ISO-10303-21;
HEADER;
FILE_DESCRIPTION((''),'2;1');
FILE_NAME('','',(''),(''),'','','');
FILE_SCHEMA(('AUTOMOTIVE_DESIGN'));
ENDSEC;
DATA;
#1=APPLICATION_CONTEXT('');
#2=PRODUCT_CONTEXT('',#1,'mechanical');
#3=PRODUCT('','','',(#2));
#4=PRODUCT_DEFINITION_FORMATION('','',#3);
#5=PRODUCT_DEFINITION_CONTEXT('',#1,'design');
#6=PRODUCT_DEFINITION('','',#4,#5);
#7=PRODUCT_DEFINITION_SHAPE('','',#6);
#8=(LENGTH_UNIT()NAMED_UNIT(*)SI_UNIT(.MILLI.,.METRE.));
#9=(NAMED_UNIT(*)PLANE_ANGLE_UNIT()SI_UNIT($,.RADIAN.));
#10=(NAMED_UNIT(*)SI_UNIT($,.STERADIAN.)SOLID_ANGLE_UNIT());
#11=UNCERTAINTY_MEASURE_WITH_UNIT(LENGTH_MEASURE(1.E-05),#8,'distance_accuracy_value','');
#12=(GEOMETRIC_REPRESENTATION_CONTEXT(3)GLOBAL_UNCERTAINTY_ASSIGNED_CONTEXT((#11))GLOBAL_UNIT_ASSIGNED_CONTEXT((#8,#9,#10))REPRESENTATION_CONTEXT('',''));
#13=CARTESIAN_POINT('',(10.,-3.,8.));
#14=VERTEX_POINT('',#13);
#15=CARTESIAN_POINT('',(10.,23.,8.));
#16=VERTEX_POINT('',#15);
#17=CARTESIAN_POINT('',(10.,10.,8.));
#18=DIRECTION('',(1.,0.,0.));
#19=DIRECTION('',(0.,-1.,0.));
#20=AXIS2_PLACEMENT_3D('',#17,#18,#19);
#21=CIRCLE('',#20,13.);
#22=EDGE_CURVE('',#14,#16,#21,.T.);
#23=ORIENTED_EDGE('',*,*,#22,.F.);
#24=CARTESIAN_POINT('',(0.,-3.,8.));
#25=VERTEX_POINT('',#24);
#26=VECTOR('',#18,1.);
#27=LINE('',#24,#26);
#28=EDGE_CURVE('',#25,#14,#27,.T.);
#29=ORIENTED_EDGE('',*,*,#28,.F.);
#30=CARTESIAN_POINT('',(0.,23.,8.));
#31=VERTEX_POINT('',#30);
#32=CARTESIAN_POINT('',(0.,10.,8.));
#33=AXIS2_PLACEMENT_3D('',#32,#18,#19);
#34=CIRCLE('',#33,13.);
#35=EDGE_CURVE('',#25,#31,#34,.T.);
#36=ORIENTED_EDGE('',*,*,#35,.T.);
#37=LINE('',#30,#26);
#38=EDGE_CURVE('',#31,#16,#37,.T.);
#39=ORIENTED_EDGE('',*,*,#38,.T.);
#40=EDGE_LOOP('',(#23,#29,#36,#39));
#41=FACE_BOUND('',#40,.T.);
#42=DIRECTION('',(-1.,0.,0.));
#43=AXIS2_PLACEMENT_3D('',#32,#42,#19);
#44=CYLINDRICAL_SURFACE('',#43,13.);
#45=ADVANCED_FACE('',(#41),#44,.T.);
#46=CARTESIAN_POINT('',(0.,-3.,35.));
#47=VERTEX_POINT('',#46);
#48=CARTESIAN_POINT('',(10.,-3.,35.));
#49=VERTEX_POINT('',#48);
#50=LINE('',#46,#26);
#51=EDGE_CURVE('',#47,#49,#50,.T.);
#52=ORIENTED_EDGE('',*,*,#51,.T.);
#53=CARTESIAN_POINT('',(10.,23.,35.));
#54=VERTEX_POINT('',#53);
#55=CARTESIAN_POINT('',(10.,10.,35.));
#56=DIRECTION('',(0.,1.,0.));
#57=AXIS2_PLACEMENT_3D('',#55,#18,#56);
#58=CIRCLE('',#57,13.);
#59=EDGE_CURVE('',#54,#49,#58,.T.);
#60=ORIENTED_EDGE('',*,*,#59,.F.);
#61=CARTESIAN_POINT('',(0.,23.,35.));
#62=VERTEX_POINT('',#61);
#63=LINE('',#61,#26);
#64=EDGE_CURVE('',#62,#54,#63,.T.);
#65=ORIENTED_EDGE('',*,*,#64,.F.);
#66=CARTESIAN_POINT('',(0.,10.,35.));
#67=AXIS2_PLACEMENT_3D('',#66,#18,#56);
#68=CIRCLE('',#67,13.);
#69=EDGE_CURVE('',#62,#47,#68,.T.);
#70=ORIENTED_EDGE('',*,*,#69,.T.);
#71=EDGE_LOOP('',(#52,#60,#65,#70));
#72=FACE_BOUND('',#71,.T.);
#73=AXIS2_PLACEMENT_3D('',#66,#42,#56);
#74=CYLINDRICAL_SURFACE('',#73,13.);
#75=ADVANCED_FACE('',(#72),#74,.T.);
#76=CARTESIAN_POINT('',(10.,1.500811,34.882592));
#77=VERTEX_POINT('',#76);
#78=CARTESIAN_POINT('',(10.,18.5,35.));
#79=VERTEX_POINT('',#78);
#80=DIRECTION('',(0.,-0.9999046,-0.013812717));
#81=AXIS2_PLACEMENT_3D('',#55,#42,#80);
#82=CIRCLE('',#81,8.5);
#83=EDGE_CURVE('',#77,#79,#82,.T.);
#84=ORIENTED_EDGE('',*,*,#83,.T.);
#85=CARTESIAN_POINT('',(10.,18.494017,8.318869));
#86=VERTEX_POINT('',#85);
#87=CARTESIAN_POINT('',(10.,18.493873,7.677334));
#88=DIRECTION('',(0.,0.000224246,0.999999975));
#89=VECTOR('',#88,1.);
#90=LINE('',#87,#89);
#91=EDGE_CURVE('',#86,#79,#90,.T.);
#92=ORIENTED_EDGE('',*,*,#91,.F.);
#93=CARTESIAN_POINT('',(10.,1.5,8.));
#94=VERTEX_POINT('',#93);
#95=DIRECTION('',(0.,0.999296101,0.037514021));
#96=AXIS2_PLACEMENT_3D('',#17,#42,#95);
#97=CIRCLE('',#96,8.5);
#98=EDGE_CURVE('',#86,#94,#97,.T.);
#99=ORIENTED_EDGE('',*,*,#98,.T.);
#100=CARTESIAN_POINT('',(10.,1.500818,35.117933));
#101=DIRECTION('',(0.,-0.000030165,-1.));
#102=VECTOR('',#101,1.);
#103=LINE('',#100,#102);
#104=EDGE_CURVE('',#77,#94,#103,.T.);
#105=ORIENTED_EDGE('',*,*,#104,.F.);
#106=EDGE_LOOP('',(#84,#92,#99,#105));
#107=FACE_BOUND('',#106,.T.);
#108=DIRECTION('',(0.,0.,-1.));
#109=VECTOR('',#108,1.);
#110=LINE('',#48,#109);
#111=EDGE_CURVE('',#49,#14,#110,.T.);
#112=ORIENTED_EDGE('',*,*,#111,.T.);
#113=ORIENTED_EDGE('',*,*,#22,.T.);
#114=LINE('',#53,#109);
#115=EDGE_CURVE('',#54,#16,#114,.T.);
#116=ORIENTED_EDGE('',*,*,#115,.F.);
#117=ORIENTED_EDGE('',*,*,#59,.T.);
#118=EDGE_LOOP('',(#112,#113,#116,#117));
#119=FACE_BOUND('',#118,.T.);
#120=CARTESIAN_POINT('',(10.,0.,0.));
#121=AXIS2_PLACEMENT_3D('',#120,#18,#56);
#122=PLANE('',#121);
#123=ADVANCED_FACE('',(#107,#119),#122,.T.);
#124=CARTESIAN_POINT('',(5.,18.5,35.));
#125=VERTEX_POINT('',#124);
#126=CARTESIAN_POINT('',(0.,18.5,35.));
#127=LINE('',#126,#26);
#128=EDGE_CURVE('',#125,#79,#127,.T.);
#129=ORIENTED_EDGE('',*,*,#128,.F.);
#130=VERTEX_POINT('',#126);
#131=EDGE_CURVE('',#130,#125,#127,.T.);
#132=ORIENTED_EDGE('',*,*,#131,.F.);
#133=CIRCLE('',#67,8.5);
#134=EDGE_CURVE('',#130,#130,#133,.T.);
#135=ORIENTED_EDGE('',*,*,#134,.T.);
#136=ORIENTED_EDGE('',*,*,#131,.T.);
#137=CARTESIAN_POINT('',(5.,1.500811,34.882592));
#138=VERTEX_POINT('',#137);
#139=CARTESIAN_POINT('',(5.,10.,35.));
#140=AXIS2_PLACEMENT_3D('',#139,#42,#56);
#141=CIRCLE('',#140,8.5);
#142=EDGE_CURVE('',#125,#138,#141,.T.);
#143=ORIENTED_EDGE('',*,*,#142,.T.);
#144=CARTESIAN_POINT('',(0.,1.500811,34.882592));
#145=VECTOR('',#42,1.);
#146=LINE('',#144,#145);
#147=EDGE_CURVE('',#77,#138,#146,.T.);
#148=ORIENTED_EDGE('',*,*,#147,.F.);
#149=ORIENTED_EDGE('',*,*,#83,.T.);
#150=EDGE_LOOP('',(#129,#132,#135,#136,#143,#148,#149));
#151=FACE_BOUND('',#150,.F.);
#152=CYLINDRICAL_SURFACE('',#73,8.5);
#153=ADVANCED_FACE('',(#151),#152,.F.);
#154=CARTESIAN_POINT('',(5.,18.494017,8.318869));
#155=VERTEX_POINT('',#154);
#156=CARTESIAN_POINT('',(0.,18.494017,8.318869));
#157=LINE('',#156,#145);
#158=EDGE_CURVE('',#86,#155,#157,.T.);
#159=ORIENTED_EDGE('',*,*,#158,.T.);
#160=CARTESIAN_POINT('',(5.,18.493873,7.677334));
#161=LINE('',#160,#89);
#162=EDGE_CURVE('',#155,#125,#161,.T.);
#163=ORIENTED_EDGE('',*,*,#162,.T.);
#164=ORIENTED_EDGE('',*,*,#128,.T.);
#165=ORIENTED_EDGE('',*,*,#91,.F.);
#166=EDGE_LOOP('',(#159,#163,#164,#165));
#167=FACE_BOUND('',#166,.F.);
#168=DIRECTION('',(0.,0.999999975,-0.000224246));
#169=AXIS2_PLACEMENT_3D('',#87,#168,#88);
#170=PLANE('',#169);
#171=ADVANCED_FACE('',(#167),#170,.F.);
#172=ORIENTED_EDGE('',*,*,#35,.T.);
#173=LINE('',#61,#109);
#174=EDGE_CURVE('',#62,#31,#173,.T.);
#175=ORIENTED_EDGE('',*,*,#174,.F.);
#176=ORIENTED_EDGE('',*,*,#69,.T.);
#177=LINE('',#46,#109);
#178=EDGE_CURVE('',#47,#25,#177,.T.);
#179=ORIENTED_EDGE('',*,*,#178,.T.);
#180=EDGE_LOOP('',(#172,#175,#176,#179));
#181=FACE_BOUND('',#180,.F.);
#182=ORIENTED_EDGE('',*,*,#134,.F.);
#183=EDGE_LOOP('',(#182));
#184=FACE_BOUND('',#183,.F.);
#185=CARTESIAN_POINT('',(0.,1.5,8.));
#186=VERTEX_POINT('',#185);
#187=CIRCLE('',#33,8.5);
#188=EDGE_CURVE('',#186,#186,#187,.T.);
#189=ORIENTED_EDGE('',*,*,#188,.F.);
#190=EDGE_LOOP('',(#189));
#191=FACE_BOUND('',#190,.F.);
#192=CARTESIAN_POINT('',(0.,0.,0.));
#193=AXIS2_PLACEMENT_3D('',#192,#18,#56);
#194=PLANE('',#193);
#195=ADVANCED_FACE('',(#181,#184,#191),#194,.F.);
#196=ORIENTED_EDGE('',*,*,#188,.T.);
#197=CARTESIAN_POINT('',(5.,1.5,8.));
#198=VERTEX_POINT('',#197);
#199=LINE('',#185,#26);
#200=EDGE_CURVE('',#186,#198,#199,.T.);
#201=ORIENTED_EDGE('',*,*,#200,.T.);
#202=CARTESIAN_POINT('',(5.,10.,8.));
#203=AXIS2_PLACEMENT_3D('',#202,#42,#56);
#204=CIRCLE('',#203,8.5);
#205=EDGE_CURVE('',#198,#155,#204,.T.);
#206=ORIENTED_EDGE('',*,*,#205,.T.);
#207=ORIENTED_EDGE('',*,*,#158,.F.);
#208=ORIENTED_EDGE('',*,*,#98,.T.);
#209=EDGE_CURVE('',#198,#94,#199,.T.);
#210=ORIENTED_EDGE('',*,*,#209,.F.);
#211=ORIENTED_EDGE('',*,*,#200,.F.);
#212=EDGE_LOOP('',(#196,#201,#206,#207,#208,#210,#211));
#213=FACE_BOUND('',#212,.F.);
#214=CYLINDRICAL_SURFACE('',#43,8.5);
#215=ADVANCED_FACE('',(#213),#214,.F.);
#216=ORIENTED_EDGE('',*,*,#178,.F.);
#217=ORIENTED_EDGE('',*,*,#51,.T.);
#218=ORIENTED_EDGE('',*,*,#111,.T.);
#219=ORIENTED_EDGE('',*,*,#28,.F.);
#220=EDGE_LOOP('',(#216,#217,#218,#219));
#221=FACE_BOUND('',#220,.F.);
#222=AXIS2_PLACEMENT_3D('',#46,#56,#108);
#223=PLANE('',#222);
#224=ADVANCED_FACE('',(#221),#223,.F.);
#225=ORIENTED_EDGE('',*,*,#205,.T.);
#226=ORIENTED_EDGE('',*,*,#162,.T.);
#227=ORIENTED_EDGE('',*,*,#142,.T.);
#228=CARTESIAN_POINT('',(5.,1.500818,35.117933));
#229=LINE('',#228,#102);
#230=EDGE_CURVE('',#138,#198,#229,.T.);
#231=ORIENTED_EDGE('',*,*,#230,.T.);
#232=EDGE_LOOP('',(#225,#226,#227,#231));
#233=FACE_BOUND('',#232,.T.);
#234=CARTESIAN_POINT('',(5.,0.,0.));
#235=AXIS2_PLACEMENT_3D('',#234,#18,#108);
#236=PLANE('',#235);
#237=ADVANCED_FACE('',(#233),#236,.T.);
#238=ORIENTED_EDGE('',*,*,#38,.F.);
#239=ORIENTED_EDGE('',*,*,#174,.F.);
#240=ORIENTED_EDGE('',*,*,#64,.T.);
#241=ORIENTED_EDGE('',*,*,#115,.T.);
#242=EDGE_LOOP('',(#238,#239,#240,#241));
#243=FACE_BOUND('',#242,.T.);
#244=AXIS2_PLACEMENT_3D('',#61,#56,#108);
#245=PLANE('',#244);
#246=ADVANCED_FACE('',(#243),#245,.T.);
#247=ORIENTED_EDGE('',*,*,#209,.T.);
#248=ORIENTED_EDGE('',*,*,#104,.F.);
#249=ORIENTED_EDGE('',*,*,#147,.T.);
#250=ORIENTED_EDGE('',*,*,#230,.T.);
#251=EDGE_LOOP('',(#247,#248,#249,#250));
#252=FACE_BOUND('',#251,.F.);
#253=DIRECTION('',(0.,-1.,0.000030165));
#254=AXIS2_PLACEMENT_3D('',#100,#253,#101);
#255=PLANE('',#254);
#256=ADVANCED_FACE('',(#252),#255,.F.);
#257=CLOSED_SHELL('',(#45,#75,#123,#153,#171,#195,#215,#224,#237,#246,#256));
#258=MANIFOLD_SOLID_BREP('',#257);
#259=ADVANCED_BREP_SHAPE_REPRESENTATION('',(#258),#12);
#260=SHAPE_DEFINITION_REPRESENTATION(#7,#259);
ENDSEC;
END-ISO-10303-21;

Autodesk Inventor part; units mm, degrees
ref_plane "YZ Plane" through (0, 0, 0) normal (1, 0, 0) x (0, 1, 0)
ref_plane "XZ Plane" through (0, 0, 0) normal (0, 1, 0) x (-1, 0, 0)
ref_plane "XY Plane" through (0, 0, 0) normal (0, 0, 1) x (1, 0, 0)
sketch "Sketch1" plane through (0, 0, 0) normal (1, 0, 0) x (0, 1, 0)
  arc A0 (18.5, 35) -> (1.5, 35) centre (10, 35) ccw
  arc A1 (1.5, 8) -> (18.5, 8) centre (10, 8) ccw
  arc A2 (23, 35) -> (-3, 35) centre (10, 35) ccw
  arc A3 (-3, 8) -> (23, 8) centre (10, 8) ccw
  line L0 (-3, 35) -> (-3, 8)
  line L1 (23, 35) -> (23, 8)
  circle A4 centre (10, 35) radius 8.5
  circle A5 centre (10, 8) radius 8.5
  dimension "d12" = 17
  dimension "d13" = 17
  dimension "d15" = 26
  dimension "d16" = 26
extrude "Extrusion1" add sketch "Sketch1" along normal blind 10
sketch "Sketch2" plane through (10, 0, 0) normal (1, 0, 0) x (0, 0, -1)
  circle A0 centre (-35, 10) radius 8.5
  circle A1 centre (-8, 10) radius 8.5
  circle A2 centre (-8, 10) radius 8.5
  line L0 (-35, 10) -> (-35, 18.5)
  circle A3 centre (-35, 10) radius 8.5
  line L1 (-35, 10) -> (-26.5, 10) construction
  line L2 (-35, 18.5) -> (-7.677334, 18.493873)
  line L3 (-8, 10) -> (-8, 1.5)
  line L4 (-8, 10) -> (0.5, 10) construction
  line L5 (-8, 1.5) -> (-35.117933, 1.500818)
  point P0 (0, 0)
  dimension "d19" = 90
  dimension "d20" = 90
sketch "Sketch2 outline for Extrusion2" plane through (10, 0, 0) normal (1, 0, 0) x (0, 0, -1)
  arc A0 (-8, 1.5) -> (-7.677334, 18.493873) centre (-8, 10) ccw
  line L0 (-35.117933, 1.500818) -> (-8, 1.5)
  arc A1 (-35, 18.5) -> (-35.117933, 1.500818) centre (-35, 10) ccw
  line L1 (-7.677334, 18.493873) -> (-35, 18.5)
extrude "Extrusion2" cut sketch "Sketch2 outline for Extrusion2" against normal blind 5
properties part number "Sensor support"
